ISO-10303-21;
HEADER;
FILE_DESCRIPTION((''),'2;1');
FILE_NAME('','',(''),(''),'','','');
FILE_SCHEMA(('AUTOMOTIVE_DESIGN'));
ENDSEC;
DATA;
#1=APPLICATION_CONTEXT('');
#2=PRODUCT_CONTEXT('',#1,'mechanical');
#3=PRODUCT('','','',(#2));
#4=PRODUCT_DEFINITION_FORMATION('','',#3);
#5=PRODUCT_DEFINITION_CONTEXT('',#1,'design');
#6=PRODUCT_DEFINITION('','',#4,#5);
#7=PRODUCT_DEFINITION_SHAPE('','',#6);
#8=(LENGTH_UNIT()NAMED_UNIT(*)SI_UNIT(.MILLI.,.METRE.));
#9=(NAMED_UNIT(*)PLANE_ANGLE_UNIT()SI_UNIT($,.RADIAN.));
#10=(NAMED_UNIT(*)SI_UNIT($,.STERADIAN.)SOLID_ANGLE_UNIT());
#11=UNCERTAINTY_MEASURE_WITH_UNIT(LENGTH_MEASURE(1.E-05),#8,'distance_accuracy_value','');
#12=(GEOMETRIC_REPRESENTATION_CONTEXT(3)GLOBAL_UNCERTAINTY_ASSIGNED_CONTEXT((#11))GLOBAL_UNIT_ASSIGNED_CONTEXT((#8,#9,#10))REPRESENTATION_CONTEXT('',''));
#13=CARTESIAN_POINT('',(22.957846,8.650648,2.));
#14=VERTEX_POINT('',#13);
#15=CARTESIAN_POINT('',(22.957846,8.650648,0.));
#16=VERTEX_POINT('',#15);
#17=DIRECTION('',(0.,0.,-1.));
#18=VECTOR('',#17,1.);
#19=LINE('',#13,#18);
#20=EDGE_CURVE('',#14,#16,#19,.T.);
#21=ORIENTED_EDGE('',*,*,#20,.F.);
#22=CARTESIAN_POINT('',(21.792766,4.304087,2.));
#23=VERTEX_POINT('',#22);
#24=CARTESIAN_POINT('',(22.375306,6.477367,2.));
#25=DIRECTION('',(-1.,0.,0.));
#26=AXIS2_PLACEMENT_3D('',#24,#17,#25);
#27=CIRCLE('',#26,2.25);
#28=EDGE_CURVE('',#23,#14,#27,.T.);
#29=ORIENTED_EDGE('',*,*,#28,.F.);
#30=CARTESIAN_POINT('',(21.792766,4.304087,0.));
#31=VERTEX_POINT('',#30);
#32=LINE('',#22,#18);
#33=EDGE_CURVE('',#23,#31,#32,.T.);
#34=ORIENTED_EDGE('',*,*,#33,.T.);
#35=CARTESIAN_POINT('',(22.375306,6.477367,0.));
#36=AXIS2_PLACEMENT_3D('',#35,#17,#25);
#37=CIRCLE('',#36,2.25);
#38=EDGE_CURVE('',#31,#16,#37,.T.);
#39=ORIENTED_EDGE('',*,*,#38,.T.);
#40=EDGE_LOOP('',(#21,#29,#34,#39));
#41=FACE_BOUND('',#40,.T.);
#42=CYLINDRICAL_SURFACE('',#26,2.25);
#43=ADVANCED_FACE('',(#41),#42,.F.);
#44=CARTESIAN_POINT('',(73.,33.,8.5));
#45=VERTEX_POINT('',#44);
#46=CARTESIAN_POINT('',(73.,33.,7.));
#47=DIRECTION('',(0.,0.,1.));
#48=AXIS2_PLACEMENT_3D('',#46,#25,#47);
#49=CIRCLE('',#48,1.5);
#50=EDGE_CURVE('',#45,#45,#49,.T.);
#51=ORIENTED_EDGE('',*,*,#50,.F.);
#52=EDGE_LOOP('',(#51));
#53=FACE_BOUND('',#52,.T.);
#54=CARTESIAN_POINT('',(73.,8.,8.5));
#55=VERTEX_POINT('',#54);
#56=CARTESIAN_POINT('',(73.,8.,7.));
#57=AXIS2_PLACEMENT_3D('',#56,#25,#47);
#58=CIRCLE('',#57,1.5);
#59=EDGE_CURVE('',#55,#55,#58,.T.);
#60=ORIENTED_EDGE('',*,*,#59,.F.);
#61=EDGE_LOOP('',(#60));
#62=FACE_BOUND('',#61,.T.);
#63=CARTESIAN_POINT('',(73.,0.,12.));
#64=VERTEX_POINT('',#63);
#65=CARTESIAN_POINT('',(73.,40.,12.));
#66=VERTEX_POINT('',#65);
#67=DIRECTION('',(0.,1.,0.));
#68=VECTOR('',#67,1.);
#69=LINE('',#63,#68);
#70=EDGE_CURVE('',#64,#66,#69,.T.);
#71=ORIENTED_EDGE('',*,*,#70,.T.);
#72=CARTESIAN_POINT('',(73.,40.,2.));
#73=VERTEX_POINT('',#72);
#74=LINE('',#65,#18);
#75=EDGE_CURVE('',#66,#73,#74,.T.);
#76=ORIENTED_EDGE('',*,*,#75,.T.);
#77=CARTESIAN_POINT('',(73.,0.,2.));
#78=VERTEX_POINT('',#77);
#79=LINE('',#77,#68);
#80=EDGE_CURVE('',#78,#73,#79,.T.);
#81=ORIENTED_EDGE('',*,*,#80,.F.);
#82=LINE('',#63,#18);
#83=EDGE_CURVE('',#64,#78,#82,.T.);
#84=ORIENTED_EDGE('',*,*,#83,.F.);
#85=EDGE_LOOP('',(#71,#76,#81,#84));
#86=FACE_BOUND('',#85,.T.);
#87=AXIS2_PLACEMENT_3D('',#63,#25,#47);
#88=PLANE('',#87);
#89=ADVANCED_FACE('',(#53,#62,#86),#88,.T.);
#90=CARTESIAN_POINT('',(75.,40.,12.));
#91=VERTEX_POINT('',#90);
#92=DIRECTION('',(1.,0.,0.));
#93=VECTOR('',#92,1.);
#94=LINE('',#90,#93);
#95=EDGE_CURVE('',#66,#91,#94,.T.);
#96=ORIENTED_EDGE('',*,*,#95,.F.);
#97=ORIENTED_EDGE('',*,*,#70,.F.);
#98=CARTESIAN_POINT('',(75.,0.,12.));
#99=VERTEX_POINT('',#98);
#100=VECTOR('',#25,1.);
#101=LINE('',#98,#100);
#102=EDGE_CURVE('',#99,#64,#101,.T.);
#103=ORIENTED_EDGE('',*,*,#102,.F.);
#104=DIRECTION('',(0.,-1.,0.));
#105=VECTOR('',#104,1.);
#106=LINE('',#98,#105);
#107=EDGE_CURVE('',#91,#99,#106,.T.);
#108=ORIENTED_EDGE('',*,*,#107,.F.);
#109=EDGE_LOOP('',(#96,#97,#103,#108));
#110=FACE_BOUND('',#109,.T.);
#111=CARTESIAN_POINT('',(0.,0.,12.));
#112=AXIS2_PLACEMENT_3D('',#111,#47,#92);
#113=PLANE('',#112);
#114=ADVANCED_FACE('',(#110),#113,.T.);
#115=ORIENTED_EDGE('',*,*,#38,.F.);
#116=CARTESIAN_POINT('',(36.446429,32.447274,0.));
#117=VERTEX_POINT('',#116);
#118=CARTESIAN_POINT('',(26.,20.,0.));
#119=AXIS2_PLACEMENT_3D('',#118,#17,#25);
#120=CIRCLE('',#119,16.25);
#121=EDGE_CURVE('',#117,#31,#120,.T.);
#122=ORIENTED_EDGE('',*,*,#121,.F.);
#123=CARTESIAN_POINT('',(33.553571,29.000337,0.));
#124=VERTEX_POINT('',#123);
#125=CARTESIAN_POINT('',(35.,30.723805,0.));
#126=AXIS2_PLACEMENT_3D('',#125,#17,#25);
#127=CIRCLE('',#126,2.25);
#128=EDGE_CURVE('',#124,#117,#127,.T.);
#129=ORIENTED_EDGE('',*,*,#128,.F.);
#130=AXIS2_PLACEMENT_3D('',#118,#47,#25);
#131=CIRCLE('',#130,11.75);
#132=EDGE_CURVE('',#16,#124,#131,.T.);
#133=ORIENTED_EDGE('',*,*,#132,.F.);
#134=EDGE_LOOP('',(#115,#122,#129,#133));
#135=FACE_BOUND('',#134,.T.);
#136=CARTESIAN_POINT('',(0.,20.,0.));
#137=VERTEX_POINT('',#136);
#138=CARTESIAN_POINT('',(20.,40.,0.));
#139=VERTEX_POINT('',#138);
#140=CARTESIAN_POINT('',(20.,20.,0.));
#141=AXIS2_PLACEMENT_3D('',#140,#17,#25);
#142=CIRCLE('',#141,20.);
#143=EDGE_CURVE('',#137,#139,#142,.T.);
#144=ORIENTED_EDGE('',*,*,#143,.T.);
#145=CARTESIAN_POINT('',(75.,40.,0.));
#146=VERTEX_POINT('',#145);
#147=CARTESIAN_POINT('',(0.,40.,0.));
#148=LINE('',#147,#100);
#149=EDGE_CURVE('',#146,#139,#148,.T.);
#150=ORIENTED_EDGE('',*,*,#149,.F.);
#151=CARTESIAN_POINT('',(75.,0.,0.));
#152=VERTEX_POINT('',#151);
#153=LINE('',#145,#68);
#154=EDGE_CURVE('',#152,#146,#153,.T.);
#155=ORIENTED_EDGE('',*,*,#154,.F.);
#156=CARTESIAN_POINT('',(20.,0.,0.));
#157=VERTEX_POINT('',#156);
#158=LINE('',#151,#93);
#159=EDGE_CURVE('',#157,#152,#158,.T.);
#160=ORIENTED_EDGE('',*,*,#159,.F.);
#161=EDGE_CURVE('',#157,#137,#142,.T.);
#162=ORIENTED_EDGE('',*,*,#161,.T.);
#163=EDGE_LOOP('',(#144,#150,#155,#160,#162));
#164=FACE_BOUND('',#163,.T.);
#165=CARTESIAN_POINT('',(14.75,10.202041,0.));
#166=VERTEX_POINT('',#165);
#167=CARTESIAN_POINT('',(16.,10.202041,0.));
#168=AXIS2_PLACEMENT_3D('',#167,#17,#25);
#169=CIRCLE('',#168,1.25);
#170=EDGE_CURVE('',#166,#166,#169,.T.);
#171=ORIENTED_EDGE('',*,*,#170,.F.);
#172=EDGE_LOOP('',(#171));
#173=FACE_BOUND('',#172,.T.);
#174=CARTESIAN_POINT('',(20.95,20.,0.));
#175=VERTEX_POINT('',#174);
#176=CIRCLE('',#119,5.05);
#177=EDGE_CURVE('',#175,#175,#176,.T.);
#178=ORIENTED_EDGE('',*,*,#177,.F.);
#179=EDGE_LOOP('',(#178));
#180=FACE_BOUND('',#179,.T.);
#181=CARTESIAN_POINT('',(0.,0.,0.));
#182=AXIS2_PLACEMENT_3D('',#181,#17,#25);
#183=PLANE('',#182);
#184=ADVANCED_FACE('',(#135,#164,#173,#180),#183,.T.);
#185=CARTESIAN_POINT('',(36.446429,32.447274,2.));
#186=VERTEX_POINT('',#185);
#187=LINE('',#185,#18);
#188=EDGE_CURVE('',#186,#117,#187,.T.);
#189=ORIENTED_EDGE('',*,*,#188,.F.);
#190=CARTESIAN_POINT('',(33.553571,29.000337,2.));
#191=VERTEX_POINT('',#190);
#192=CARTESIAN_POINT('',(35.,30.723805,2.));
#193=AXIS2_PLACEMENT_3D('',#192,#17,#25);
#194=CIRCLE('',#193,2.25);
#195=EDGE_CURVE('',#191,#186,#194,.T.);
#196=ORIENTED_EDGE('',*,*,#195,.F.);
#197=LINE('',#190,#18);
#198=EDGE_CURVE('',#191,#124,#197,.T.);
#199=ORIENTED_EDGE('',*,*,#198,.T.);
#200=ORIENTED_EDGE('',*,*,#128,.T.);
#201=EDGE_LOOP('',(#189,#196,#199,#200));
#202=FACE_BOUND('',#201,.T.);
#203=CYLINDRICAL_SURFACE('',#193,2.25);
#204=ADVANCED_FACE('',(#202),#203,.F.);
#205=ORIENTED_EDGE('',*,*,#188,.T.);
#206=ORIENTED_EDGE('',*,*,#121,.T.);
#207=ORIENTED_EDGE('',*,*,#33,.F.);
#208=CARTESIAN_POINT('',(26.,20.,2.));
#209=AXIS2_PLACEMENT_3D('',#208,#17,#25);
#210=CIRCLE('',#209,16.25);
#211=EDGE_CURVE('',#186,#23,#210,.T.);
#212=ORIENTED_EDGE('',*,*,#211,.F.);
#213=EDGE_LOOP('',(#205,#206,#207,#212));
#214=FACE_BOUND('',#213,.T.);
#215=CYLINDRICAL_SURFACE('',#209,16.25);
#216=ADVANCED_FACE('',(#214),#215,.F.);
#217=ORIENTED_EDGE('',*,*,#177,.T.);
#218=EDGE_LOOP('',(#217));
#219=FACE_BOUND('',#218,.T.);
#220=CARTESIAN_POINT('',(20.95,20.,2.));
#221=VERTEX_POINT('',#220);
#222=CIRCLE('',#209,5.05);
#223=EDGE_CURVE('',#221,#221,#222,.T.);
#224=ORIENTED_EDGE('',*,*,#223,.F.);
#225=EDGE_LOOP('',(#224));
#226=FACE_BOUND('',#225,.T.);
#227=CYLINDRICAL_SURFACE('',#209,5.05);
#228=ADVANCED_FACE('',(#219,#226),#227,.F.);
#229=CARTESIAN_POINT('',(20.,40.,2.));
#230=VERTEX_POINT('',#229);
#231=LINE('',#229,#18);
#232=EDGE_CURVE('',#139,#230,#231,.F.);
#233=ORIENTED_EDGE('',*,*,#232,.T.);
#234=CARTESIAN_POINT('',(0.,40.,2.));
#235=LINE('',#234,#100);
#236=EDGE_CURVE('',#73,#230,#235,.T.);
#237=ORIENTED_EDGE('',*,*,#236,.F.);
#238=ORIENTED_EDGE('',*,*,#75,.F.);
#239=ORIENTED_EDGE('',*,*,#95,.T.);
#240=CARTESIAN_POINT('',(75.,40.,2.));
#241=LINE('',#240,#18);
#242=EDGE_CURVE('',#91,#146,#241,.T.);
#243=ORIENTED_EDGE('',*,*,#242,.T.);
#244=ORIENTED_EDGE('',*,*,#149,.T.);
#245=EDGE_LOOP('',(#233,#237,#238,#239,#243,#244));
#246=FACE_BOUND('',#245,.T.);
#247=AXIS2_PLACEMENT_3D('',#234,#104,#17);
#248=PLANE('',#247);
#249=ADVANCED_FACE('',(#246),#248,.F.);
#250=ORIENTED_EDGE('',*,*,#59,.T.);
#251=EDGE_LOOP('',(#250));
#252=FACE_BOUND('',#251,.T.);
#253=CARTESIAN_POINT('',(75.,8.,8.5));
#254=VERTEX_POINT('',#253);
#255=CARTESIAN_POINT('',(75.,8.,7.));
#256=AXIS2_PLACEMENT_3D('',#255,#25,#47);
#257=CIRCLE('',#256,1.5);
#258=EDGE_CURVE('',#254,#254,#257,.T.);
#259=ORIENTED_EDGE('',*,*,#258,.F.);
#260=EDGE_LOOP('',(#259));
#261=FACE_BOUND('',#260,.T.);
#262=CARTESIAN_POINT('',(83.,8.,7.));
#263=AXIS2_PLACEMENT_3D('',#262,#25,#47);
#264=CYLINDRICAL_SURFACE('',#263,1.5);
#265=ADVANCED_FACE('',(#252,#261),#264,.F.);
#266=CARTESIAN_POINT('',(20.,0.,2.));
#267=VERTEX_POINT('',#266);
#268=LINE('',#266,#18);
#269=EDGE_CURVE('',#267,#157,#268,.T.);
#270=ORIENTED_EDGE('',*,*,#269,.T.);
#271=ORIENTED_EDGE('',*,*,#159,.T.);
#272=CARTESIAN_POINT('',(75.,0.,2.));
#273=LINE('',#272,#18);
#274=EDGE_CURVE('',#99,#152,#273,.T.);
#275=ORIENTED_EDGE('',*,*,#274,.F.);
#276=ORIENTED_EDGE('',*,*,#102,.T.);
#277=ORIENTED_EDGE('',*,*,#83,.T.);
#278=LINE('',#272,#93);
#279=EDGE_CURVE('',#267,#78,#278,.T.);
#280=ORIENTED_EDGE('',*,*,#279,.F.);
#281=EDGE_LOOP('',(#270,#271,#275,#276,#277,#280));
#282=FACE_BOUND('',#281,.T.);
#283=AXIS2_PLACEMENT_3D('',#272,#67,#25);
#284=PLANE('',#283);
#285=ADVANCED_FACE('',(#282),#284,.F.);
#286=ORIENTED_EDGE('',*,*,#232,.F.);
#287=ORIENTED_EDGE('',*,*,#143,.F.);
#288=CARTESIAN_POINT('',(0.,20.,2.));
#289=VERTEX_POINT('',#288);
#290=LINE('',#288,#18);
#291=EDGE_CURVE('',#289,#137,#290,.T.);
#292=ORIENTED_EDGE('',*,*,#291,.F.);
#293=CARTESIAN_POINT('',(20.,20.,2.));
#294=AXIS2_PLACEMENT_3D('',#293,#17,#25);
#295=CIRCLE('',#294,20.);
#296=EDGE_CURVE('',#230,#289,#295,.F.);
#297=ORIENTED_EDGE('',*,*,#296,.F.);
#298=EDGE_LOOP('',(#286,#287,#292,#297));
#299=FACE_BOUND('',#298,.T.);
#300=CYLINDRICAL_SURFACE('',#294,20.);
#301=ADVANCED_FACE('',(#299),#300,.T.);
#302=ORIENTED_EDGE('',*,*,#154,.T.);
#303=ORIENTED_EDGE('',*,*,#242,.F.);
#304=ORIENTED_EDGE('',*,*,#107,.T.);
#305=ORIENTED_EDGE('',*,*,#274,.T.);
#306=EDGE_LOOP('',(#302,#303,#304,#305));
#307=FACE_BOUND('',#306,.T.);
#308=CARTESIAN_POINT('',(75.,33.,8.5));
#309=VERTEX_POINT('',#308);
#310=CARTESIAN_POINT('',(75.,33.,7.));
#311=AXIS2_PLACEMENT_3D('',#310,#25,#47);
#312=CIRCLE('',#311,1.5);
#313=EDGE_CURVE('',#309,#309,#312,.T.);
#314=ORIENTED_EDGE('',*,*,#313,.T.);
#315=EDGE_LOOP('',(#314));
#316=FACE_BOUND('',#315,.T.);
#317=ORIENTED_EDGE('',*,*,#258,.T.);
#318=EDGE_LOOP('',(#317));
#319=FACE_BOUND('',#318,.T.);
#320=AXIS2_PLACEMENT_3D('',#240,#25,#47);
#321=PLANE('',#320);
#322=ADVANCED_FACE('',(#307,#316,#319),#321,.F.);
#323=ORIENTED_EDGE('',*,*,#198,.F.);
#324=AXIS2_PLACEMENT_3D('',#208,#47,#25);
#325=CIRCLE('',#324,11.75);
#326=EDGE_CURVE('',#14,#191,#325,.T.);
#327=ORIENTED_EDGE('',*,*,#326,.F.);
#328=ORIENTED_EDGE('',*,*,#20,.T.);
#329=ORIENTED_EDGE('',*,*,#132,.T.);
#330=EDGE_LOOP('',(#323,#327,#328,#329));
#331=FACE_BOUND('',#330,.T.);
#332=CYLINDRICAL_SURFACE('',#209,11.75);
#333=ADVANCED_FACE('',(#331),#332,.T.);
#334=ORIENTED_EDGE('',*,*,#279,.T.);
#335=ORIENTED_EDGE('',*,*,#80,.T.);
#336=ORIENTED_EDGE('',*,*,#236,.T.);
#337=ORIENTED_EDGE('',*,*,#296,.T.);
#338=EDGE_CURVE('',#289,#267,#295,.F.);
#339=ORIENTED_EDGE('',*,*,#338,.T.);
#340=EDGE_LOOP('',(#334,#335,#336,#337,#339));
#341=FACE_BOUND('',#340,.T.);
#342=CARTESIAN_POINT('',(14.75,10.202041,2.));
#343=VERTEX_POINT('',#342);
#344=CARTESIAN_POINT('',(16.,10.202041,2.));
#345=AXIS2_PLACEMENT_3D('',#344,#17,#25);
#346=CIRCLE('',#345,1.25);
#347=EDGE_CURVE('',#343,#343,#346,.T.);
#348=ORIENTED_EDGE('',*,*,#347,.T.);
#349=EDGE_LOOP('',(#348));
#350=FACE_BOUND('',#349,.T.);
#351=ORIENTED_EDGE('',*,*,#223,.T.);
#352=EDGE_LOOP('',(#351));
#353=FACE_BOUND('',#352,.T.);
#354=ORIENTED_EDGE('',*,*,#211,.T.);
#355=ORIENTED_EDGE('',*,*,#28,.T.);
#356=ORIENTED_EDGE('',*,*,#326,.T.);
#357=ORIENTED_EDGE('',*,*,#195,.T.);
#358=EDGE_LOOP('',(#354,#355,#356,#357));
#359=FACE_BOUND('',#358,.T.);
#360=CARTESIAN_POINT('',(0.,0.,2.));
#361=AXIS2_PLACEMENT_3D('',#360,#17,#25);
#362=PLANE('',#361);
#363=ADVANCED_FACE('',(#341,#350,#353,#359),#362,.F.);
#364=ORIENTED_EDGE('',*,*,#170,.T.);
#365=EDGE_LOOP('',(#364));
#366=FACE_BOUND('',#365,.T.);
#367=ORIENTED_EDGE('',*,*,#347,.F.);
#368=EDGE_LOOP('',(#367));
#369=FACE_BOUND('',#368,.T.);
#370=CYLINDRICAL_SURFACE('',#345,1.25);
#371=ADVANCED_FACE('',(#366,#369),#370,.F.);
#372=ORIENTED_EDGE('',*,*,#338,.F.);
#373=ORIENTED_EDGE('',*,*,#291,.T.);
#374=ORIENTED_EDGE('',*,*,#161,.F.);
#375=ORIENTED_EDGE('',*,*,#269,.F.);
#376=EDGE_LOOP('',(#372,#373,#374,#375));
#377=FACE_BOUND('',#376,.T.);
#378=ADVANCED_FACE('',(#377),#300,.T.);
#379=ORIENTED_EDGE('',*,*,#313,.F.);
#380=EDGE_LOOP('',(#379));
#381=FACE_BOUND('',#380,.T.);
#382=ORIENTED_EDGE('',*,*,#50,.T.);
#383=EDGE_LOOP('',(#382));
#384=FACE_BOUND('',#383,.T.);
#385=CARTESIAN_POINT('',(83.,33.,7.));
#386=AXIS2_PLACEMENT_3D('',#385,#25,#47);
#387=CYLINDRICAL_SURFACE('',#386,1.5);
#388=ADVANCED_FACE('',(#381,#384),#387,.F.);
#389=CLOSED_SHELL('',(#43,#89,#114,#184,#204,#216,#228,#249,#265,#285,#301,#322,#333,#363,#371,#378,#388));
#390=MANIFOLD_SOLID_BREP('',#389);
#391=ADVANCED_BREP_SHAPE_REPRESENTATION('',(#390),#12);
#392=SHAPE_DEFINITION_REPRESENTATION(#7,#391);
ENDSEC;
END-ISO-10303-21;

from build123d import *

# Parameters (mm, degrees)
SKETCH_2_W          = 75
SKETCH_2_H          = 40
EXTRUDE_1_DEPTH     = 2
SKETCH_3_R          = 5.05
SKETCH_3_R_2        = 1.25
CUT_EXTRUDE_1_DEPTH = 86.023526156
FILLET_1_R          = 20
SKETCH_7_W          = 2
SKETCH_7_H          = 40
EXTRUDE_3_DEPTH     = 12
SKETCH_8_R          = 1.5
CUT_EXTRUDE_2_DEPTH = 10


with BuildPart() as part:
    # 草图2 → 凸台-拉伸1 (new body)
    with BuildSketch(Plane.XY):
        with Locations((37.5, 20)):
            Rectangle(SKETCH_2_W, SKETCH_2_H)
    extrude(amount=EXTRUDE_1_DEPTH)

    # 草图3 → 切除-拉伸1 (cut, through all)
    with BuildSketch(Plane(origin=(0, 0, 0), x_dir=(-1, 0, 0), z_dir=(0, 0, -1))):
        with Locations((-26, 20)):
            Circle(SKETCH_3_R)
        with Locations((-16, 10.202041029)):
            Circle(SKETCH_3_R_2)
        with BuildLine():
            ThreePointArc((-36.446428571, 32.447274003), (-40.413244876, 12.495276677), (-21.792765741, 4.30408716))
            ThreePointArc((-21.792765741, 4.30408716), (-20.20202563, 7.059907527), (-22.957845998, 8.650647638))
            ThreePointArc((-22.957845998, 8.650647638), (-36.421884756, 14.573507751), (-33.553571429, 29.000336587))
            ThreePointArc((-33.553571429, 29.000336587), (-33.276531292, 32.170233866), (-36.446428571, 32.447274003))
        make_face()
    extrude(amount=-CUT_EXTRUDE_1_DEPTH, mode=Mode.SUBTRACT)

    # 圆角1
    fillet_1_edges = [part.edges().sort_by_distance(p)[0] for p in [
        (0, 40, 1),
        (0, 0, 1),
    ]]
    fillet(fillet_1_edges, radius=FILLET_1_R - 0.0001)  # a hair under: the kernel refuses the full size

    # 草图7 → 凸台-拉伸3 (add)
    with BuildSketch(Plane(origin=(0, 0, 0), x_dir=(-1, 0, 0), z_dir=(0, 0, -1))):
        with Locations((-74, 20)):
            Rectangle(SKETCH_7_W, SKETCH_7_H)
    extrude(amount=-EXTRUDE_3_DEPTH)

    # 草图8 → 切除-拉伸2 (cut)
    with BuildSketch(Plane.ZY.offset(-73)):
        with Locations((7, 33)):
            Circle(SKETCH_8_R)
        with Locations((7, 8)):
            Circle(SKETCH_8_R)
    extrude(amount=-CUT_EXTRUDE_2_DEPTH, mode=Mode.SUBTRACT)


solid = part.part
